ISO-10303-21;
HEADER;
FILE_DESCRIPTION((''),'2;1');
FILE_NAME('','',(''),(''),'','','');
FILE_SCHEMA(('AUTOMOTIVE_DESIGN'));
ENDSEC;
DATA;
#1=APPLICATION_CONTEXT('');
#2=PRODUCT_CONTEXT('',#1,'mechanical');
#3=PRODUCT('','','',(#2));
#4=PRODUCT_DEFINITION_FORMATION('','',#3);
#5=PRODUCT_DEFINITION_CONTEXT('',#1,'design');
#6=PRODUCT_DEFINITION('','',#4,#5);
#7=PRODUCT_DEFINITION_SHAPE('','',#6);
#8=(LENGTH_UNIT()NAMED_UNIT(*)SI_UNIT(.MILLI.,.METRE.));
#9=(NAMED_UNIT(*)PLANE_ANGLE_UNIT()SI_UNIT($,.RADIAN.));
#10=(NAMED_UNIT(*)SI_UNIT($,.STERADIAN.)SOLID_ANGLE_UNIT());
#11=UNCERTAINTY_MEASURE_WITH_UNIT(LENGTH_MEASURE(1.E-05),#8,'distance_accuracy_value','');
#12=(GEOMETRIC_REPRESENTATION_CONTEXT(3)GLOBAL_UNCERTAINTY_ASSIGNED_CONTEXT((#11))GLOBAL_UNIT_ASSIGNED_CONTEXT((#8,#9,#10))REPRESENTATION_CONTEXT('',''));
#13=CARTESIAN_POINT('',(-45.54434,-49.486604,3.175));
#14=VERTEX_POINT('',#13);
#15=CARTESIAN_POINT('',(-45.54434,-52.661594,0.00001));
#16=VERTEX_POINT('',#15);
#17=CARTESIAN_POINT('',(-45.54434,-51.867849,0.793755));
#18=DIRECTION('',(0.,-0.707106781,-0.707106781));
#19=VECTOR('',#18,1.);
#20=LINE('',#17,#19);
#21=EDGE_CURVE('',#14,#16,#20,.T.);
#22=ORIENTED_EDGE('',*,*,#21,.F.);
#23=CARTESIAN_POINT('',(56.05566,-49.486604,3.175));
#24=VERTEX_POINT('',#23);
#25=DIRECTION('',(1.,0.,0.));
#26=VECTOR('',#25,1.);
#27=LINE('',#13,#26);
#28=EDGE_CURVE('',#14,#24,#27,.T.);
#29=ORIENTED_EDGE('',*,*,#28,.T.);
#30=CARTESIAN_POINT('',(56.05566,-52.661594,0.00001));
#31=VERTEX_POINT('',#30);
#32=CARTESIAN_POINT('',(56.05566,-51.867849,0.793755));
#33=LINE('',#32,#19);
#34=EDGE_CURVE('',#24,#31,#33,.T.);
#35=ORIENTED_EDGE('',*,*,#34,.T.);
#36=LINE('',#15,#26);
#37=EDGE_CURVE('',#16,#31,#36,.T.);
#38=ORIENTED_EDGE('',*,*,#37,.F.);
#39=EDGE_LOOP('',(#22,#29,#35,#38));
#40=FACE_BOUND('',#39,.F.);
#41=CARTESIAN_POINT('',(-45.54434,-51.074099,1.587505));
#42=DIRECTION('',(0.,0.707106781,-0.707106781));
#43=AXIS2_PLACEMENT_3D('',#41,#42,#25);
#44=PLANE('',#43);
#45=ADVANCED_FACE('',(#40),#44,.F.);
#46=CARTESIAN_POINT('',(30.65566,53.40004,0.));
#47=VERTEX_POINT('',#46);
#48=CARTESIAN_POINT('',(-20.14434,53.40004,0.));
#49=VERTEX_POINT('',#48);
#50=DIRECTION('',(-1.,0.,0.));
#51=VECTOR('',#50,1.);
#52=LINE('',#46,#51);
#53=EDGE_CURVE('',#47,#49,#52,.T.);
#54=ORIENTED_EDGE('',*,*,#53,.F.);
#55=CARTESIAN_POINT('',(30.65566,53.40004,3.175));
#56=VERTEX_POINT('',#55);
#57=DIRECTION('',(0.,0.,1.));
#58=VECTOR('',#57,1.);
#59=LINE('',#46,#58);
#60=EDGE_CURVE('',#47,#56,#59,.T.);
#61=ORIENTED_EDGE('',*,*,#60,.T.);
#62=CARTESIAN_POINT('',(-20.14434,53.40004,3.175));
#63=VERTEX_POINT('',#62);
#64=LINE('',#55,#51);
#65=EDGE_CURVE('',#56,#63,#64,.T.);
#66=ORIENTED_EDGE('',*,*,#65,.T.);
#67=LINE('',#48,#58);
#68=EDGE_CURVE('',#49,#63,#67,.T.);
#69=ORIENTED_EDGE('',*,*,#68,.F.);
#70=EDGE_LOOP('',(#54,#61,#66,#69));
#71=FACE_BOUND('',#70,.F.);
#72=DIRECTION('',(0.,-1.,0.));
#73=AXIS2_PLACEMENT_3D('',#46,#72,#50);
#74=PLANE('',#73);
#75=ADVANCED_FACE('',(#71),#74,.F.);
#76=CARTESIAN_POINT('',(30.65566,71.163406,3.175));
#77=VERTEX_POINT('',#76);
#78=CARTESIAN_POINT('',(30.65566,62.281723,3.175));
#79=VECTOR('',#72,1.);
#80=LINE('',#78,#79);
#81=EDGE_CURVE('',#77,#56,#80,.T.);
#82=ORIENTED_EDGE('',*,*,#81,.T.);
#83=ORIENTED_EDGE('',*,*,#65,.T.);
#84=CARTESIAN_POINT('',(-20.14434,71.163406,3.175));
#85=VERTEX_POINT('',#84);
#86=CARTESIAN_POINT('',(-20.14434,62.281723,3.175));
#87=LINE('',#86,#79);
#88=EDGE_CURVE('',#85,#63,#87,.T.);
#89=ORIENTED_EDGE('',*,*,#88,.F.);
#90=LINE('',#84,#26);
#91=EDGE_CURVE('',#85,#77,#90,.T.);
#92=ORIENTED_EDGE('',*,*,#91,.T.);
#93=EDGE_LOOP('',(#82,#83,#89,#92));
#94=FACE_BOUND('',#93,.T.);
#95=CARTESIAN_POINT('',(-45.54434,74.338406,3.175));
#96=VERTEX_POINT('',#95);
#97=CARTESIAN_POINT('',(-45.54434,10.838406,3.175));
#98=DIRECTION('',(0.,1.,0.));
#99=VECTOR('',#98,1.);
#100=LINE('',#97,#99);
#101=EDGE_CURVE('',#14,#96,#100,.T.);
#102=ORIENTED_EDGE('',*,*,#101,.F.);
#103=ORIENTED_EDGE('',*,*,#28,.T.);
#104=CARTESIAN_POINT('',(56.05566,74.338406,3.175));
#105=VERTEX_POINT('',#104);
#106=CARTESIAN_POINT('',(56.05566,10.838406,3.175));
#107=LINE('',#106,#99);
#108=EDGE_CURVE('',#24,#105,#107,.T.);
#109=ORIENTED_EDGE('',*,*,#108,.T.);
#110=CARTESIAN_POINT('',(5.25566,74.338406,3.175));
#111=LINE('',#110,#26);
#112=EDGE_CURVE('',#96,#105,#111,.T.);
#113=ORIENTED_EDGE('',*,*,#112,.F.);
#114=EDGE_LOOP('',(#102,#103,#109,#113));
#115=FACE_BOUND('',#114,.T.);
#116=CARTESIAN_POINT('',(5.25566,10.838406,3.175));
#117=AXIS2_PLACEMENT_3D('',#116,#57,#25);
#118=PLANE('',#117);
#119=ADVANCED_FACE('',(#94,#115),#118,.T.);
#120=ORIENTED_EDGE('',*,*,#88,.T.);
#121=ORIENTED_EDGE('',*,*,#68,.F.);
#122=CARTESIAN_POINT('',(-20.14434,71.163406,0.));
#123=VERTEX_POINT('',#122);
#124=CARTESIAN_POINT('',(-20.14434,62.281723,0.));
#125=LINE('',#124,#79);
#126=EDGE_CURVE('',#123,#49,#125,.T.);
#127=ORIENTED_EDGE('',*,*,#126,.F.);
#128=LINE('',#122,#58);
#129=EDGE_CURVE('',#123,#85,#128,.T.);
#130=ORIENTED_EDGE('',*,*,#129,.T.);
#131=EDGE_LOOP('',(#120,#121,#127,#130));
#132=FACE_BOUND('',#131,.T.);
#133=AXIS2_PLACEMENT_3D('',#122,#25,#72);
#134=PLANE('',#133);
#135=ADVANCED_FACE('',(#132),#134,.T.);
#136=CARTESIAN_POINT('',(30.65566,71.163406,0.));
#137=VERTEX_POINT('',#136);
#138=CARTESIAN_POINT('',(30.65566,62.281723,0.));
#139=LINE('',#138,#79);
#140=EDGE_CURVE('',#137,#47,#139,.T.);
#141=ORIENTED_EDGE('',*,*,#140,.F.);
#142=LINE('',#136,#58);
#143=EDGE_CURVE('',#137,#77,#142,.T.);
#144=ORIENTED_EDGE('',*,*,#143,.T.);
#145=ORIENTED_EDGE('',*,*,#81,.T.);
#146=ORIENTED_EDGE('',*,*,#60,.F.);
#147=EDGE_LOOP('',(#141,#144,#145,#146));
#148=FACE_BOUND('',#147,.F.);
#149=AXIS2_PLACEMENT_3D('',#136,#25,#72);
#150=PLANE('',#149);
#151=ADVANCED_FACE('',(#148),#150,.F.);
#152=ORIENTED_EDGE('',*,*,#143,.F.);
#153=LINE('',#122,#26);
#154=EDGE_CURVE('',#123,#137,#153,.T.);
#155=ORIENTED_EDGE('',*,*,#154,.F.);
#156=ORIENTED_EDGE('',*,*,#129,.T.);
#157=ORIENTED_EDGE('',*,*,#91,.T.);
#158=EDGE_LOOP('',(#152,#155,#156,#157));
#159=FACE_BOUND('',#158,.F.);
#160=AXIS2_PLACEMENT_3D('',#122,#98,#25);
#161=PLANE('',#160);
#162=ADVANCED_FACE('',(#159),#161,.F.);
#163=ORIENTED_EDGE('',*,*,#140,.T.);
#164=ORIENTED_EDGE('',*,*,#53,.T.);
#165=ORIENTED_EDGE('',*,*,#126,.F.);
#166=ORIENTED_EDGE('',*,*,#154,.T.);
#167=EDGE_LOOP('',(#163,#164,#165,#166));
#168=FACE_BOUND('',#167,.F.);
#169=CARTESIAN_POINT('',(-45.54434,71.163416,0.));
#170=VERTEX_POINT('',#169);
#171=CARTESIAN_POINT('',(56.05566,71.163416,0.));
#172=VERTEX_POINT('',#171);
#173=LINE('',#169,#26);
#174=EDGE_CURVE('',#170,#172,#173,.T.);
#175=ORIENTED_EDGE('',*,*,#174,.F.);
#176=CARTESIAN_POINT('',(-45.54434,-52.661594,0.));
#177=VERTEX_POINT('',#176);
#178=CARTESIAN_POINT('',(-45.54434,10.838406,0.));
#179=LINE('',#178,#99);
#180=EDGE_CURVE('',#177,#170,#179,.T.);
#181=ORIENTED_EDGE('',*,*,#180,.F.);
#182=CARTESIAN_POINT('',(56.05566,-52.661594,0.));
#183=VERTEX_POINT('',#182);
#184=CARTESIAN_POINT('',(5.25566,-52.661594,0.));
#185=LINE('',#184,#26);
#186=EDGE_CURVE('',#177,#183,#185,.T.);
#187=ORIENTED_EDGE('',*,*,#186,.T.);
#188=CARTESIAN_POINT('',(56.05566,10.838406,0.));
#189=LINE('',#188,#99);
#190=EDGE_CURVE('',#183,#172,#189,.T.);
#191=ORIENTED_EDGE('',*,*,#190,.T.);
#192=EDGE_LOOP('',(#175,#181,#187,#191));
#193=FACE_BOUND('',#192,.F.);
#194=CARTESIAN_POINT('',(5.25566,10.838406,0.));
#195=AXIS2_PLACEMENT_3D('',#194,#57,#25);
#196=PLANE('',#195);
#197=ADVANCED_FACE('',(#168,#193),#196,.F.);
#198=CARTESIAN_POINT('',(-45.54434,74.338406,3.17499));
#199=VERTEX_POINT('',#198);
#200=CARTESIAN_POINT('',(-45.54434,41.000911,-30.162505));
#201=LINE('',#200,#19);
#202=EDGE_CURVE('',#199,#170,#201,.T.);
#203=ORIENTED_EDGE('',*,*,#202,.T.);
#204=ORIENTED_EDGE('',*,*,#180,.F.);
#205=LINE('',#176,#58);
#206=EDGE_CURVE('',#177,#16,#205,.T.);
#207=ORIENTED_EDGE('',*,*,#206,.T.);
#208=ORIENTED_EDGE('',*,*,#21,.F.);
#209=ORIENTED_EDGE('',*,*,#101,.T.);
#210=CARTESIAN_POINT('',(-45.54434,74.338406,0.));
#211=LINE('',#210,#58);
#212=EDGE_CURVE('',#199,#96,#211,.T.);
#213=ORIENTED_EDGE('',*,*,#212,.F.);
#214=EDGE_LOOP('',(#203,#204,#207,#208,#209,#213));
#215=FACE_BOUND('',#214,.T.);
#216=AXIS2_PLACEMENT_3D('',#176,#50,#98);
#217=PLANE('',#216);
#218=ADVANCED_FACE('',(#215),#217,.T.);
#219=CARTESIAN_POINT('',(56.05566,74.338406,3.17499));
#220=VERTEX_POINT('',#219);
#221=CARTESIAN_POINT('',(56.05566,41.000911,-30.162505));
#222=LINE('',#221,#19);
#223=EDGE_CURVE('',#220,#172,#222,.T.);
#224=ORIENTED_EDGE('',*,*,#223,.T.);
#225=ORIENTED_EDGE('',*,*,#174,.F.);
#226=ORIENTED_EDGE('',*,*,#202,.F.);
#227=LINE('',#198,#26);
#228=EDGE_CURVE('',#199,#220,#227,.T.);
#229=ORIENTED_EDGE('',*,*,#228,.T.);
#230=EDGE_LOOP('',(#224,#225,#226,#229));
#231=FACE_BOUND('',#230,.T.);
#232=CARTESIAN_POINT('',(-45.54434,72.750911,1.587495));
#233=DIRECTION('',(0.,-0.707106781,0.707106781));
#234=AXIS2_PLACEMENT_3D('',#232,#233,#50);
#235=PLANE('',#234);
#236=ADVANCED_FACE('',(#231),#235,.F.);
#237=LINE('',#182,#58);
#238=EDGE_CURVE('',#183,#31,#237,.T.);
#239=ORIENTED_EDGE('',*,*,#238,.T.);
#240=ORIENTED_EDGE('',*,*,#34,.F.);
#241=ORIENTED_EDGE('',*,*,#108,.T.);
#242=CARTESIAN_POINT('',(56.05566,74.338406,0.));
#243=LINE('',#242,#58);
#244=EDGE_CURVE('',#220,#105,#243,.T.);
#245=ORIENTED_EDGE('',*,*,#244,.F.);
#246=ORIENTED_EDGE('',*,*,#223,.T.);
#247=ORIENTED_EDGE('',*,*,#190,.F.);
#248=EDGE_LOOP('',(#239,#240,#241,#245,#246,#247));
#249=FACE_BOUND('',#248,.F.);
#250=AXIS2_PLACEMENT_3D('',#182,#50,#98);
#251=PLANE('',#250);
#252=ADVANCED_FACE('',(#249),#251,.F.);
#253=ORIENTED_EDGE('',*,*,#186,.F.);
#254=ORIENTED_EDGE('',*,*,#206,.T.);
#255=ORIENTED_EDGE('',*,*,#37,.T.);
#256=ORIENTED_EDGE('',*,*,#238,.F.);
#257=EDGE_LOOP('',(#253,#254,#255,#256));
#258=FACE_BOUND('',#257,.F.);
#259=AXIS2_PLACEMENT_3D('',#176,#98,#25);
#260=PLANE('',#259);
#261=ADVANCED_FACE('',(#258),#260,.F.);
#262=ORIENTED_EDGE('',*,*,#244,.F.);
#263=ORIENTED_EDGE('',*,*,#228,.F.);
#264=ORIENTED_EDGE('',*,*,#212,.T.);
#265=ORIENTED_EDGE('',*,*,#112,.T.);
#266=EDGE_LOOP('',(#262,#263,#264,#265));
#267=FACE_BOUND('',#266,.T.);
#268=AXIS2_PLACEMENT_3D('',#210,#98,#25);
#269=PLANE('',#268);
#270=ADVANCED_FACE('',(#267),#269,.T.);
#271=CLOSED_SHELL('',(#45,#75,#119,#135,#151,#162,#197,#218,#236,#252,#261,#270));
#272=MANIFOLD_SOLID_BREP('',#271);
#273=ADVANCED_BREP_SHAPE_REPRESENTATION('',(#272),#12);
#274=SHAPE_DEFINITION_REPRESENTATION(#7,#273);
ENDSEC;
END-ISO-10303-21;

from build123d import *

# Parameters (mm, degrees)
F0_W     = 101.6
F0_H     = 127
F1_DEPTH = 3.175
F2_SIZE  = 3.17499
F3_SIZE  = 3.17499
F4_W     = 31.75
F4_H     = 17.7633663237
F4_W_2   = 19.05
F5_DEPTH = 3.175


# Not quite as in the source:
# - a fillet or chamfer is up to 0.001 mm smaller than in the source, because OpenCascade refuses the exact size
# - a length typed as a fraction of an inch, garbled in the dataset ("3 / 203.2 mm" for 3/8 in), is restored


with BuildPart() as f1:
    # F0 (on Top) → F1 (new body)
    with BuildSketch(Plane.XY):
        with Locations((5.2556597352, 10.8384059966)):
            Rectangle(F0_W, F0_H)
    extrude(amount=F1_DEPTH)

    # F2 (size 3.175 in the source; OpenCascade refuses exactly that, so slightly less here)
    f2_edges = [f1.edges().sort_by_distance(p)[0] for p in [
        (5.25566, 74.338406, 0),
    ]]
    chamfer(f2_edges, length=F2_SIZE)

    # F3 (size 3.175 in the source; OpenCascade refuses exactly that, so slightly less here)
    f3_edges = [f1.edges().sort_by_distance(p)[0] for p in [
        (5.25566, -52.661594, 3.175),
    ]]
    chamfer(f3_edges, length=F3_SIZE)

    # F4 (on face) → F5 (cut)
    with BuildSketch(Plane(origin=(0, 0, 0), x_dir=(1, 0, 0), z_dir=(0, 0, -1))):
        with Locations((-4.2693402648, -62.2817228347)):
            Rectangle(F4_W, F4_H)
        with Locations((21.1306597352, -62.2817228347)):
            Rectangle(F4_W_2, F4_H)
    extrude(amount=-F5_DEPTH, mode=Mode.SUBTRACT)


solid = f1.part
